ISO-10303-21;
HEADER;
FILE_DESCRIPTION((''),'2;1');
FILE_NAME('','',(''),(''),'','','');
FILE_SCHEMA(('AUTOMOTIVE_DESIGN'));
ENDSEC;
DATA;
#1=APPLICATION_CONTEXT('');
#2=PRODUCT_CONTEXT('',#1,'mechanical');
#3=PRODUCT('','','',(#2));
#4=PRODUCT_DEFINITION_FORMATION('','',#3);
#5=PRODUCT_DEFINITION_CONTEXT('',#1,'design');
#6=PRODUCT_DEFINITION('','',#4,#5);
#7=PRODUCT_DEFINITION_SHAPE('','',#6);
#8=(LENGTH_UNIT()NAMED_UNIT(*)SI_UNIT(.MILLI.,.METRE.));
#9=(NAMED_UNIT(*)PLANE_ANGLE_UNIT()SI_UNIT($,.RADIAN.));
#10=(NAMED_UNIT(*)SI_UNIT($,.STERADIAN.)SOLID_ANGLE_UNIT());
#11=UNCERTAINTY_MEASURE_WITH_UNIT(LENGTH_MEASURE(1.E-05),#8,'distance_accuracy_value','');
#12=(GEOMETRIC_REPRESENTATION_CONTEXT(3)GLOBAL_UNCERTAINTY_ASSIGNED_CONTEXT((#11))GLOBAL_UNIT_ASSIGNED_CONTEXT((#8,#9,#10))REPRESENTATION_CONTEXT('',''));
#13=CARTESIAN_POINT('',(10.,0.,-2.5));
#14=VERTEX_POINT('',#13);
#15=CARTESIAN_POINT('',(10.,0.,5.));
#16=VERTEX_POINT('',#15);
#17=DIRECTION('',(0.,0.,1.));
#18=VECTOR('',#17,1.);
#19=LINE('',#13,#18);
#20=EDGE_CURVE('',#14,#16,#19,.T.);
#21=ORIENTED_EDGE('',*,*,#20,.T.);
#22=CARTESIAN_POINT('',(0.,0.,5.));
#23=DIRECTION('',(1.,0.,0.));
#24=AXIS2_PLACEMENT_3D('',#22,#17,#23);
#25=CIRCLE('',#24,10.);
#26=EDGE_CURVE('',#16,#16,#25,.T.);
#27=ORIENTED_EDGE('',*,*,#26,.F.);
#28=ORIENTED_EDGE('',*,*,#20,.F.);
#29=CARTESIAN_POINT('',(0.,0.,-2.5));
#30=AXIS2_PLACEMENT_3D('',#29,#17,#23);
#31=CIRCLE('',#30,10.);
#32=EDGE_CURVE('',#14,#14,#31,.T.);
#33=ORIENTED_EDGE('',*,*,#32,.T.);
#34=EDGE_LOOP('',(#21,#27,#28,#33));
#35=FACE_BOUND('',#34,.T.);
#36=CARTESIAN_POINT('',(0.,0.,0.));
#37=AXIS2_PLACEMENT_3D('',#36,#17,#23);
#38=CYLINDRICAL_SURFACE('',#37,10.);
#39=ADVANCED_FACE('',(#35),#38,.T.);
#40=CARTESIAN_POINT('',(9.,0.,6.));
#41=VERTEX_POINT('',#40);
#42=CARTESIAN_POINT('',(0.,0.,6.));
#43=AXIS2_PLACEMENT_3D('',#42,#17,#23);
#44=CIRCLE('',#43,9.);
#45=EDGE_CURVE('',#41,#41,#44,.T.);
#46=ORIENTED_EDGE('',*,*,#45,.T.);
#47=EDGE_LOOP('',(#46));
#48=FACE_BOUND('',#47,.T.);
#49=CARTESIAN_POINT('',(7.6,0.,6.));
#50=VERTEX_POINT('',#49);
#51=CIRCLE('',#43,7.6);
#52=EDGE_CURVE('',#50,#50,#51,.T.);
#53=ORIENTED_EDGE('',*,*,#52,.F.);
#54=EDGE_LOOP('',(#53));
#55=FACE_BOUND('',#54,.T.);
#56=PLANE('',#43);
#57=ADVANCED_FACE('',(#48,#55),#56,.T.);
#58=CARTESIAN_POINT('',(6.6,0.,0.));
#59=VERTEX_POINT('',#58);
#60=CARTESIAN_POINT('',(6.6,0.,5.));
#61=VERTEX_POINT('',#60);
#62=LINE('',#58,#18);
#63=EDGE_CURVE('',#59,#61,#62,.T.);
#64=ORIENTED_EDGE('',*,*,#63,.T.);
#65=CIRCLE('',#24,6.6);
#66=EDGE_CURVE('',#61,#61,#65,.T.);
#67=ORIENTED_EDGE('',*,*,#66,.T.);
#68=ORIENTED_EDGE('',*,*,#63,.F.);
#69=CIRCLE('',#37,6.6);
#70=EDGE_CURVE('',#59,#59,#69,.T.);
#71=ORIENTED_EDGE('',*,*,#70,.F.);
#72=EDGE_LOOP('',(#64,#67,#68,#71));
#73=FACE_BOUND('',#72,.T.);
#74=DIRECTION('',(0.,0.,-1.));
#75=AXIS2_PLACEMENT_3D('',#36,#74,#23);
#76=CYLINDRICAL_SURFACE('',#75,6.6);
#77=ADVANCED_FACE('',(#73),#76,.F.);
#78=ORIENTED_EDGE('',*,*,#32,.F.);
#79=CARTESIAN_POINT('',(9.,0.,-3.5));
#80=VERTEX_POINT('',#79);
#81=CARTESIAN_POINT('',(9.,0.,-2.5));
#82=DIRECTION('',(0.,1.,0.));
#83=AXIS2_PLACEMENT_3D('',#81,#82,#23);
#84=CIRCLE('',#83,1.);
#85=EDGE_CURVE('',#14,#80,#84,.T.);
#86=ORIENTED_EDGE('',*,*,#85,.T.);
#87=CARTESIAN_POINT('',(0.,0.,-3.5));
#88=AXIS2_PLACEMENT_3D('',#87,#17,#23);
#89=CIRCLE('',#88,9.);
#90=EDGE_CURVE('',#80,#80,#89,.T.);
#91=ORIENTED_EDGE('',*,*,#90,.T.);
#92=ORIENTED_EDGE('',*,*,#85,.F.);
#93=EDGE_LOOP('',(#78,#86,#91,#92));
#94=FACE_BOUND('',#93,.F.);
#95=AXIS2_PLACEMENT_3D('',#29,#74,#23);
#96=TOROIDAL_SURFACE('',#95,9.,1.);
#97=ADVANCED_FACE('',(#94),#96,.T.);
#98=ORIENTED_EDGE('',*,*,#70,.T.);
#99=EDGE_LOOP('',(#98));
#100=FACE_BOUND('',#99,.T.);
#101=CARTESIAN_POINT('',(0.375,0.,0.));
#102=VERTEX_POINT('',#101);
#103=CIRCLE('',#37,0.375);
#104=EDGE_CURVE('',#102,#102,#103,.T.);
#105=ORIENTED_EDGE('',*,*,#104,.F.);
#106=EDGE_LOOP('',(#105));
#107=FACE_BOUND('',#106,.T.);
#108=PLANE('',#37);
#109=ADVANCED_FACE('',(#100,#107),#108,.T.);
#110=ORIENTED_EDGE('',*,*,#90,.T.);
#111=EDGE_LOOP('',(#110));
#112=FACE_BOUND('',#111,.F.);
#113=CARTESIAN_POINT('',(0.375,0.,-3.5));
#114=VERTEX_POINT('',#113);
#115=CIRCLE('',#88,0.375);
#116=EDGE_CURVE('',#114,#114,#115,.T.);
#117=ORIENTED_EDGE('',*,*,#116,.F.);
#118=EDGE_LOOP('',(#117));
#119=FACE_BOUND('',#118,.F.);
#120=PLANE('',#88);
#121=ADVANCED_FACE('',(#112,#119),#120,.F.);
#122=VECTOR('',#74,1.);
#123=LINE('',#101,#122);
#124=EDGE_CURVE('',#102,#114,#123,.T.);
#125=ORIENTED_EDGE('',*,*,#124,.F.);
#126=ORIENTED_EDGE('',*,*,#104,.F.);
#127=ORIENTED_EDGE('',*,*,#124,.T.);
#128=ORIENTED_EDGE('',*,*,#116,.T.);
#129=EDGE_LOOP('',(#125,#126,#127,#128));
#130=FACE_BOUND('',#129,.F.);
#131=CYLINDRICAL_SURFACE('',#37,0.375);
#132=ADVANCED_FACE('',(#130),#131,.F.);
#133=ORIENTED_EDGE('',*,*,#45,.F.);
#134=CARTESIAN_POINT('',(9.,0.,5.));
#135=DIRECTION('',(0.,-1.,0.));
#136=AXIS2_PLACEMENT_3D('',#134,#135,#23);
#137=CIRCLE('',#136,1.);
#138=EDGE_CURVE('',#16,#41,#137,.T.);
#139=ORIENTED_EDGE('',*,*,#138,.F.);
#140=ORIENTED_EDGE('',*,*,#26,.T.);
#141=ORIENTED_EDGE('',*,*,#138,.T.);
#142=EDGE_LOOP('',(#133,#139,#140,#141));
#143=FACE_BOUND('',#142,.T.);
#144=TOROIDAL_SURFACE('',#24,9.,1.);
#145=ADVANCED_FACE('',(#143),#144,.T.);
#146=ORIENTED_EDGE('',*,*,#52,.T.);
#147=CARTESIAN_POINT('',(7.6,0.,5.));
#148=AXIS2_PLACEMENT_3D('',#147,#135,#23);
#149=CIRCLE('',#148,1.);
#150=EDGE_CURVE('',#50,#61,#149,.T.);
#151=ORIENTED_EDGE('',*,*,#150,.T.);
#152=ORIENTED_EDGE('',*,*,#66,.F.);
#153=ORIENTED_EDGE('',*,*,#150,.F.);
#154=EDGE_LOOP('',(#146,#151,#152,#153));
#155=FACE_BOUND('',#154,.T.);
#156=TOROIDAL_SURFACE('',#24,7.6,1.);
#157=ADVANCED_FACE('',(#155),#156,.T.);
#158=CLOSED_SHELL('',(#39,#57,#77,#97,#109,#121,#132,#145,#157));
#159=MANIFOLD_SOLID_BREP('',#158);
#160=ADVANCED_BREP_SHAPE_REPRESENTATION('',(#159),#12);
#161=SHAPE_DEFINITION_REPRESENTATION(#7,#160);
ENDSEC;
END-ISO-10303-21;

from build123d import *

# Parameters (mm, degrees)
F0_R     = 10
F1_DEPTH = 3.5
F2_R     = 10
F2_R_2   = 6.6
F3_DEPTH = 6
F4_R     = 1
F5_R     = 1
F6_R     = 0.375
F7_DEPTH = 3.501


# Not quite as in the source:
# - a feature names something its author has since deleted; it is built from what else it names


with BuildPart() as f1:
    # F0 (on Top) → F1 (new body)
    with BuildSketch(Plane.XY):
        Circle(F0_R)
    extrude(amount=-F1_DEPTH)

    # F2 (on face) → F3 (join)
    with BuildSketch(Plane.XY):
        Circle(F2_R)
        Circle(F2_R_2, mode=Mode.SUBTRACT)
    extrude(amount=F3_DEPTH)

    # F4
    f4_edges = [f1.edges().sort_by_distance(p)[0] for p in [
        (-6.6, 0, 6),
        (-10, 0, -3.5),
    ]]
    fillet(f4_edges, radius=F4_R)

    # F5
    f5_edges = [f1.edges().sort_by_distance(p)[0] for p in [
        (-10, 0, 6),
    ]]
    fillet(f5_edges, radius=F5_R)

    # F6 (on face) → F7 (cut, through all)
    with BuildSketch(Plane.XY):
        Circle(F6_R)
    extrude(amount=-F7_DEPTH, mode=Mode.SUBTRACT)


solid = f1.part
